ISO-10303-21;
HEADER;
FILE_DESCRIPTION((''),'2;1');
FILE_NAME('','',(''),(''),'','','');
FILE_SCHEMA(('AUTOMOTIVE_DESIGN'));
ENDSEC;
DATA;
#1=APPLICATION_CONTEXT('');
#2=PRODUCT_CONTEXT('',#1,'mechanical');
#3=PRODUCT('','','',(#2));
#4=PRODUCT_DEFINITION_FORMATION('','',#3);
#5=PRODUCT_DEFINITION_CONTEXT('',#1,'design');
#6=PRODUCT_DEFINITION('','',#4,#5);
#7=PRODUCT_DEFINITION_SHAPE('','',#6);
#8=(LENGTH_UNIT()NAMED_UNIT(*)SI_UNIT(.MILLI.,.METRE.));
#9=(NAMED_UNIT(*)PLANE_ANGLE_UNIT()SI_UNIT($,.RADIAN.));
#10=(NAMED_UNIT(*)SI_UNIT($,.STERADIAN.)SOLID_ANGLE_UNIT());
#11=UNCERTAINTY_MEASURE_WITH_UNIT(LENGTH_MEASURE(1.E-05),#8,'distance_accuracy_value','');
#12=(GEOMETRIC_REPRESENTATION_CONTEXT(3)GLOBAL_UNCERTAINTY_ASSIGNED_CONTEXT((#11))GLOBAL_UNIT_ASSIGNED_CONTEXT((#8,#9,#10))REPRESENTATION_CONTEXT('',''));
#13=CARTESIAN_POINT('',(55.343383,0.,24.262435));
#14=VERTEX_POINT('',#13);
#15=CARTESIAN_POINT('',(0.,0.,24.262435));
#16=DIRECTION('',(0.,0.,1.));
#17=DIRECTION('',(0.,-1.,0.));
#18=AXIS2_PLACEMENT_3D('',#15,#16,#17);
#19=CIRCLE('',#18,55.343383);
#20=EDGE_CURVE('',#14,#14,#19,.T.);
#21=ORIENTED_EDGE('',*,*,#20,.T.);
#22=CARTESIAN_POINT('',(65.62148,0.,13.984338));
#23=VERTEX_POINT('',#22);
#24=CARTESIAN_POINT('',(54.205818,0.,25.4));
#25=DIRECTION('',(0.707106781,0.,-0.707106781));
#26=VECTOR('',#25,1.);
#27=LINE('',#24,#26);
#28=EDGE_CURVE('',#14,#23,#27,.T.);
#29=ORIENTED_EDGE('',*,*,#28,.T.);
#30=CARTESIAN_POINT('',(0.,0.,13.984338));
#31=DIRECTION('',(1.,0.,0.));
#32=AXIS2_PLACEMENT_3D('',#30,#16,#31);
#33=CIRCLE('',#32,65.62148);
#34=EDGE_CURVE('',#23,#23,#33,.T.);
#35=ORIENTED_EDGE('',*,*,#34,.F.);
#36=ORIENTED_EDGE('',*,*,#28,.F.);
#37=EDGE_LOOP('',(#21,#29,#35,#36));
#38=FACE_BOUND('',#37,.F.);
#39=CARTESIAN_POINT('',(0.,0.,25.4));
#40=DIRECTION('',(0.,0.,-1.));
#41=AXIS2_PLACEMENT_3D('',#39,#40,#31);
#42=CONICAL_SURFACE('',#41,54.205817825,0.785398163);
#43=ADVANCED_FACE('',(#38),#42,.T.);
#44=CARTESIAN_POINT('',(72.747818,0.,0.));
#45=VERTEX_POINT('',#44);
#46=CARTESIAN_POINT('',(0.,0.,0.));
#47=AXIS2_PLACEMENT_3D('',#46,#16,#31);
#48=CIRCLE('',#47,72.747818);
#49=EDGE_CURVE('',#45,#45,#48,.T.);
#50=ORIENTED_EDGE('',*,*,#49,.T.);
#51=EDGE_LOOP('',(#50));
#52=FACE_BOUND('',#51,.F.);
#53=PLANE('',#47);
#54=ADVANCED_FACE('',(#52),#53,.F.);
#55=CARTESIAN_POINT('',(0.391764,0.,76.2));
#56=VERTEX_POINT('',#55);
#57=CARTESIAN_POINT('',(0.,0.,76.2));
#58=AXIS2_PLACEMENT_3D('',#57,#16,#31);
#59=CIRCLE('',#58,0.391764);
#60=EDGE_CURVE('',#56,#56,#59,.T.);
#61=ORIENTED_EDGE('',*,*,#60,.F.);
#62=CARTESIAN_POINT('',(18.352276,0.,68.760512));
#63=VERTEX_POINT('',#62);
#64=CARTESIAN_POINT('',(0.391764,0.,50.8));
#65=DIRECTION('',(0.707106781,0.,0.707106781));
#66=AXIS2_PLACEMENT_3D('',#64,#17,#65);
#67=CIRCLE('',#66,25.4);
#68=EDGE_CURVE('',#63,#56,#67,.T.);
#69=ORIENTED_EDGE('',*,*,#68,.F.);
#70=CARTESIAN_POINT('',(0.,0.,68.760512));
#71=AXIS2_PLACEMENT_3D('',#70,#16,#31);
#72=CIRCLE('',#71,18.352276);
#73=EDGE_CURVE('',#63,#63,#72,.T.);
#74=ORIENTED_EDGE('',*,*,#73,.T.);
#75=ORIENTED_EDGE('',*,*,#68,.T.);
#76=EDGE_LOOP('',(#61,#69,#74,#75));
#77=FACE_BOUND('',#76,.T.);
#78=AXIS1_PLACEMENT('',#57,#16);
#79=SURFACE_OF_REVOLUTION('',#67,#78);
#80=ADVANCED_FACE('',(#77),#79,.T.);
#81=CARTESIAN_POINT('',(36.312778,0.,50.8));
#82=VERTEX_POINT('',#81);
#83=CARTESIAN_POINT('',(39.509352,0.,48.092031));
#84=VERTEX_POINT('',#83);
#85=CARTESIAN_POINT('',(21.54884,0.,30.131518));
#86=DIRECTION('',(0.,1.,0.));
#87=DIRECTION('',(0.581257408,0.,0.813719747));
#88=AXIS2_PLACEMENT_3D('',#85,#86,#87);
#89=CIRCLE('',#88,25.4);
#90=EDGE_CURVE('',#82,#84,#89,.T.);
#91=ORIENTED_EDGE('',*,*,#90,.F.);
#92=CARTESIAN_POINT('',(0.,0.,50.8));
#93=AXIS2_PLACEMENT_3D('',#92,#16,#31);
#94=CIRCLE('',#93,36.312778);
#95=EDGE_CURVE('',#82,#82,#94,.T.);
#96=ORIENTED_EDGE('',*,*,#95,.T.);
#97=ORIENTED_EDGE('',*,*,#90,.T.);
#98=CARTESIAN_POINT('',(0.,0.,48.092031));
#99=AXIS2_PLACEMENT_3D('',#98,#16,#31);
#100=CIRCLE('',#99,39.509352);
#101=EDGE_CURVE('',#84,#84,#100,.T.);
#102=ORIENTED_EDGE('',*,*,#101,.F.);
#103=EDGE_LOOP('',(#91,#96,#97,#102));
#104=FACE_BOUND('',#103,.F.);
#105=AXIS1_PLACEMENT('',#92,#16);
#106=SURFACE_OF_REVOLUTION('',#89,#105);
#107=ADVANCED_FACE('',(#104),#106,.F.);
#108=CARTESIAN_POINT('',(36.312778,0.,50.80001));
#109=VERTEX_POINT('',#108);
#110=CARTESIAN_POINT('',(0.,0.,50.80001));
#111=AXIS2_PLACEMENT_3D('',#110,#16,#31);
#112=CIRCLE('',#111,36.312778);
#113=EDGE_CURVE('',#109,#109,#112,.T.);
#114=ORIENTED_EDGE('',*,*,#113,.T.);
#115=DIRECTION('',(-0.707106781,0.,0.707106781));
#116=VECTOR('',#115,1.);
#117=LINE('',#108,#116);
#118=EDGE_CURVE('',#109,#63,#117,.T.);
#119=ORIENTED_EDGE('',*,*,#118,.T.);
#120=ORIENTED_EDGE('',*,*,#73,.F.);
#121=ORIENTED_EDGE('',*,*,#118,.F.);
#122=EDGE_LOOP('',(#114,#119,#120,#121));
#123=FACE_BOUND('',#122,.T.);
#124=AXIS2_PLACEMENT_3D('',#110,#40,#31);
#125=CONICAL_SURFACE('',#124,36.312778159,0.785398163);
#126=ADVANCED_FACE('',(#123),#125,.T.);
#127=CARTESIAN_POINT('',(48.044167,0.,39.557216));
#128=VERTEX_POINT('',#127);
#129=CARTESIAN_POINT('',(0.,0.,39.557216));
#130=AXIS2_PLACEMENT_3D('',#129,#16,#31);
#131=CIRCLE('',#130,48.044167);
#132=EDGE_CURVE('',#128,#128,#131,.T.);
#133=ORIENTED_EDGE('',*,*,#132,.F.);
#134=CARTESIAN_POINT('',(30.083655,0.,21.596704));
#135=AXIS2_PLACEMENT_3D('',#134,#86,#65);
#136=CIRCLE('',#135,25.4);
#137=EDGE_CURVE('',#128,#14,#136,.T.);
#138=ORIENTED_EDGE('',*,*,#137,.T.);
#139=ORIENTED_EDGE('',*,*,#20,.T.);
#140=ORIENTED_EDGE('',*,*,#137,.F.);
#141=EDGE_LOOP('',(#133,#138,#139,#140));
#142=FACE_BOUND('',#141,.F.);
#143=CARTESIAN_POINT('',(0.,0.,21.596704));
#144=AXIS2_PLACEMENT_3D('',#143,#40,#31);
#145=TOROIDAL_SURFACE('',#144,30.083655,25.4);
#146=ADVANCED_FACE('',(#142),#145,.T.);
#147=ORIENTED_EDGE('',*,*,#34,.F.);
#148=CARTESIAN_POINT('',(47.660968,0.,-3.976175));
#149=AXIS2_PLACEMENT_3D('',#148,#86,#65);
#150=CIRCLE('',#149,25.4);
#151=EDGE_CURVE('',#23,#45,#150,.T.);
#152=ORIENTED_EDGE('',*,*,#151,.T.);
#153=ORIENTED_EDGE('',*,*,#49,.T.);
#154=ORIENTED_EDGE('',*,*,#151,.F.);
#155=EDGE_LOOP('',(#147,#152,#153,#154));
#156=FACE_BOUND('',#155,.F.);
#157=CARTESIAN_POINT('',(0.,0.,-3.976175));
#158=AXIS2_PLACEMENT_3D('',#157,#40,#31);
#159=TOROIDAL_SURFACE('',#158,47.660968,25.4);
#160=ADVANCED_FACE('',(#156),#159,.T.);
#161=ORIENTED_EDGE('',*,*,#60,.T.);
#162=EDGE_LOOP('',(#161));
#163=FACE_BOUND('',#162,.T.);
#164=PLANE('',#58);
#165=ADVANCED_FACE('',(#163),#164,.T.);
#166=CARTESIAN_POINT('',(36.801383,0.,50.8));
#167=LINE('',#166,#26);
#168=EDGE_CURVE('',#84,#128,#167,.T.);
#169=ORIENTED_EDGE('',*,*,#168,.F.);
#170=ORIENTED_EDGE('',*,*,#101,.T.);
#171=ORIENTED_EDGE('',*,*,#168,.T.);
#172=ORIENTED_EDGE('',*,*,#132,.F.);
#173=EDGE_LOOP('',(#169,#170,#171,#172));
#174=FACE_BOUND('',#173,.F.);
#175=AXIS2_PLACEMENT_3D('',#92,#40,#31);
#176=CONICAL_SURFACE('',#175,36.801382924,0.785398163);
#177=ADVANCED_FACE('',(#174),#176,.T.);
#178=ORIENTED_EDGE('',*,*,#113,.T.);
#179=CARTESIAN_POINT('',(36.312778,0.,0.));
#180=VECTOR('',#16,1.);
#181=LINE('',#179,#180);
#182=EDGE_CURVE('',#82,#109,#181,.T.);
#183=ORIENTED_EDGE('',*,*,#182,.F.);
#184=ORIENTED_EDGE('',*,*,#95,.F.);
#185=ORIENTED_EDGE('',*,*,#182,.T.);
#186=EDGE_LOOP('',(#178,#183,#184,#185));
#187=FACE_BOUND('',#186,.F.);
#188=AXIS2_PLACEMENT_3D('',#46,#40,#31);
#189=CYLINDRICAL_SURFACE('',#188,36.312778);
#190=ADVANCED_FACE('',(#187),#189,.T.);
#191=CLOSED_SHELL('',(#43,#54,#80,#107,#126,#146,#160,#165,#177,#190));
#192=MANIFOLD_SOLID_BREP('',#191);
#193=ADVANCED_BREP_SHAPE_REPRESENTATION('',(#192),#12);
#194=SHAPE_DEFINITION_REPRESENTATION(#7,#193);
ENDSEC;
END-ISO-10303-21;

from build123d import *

# Parameters (mm, degrees)
F0_R        = 36.3127781595
F1_DEPTH    = 76.2
F0_R_2      = 55.3433829245
F2_DEPTH    = 50.8
F0_R_3      = 72.7478178249
F3_DEPTH    = 25.4
F4_SIZE     = 25.39999
F5_S5_R     = 55.3433829245
F5_T6_DEPTH = 105


# Not quite as in the source:
# - a fillet or chamfer that OpenCascade refuses, or shapes differently, is made with other operations: its cross-section is extruded or revolved along the edge and cut away or added
# - a fillet or chamfer is up to 0.001 mm smaller than in the source, because OpenCascade refuses the exact size


with BuildPart() as f1:
    # F0 (on Top) → F1 (new body)
    with BuildSketch(Plane.XY):
        Circle(F0_R)
    extrude(amount=F1_DEPTH)

    # F0 (on Top) → F2 (join)
    with BuildSketch(Plane.XY):
        Circle(F0_R_2)
        Circle(F0_R, mode=Mode.SUBTRACT)
    extrude(amount=F2_DEPTH)

    # F0 (on Top) → F3 (join)
    with BuildSketch(Plane.XY):
        Circle(F0_R_3)
        Circle(F0_R_2, mode=Mode.SUBTRACT)
    extrude(amount=F3_DEPTH)

    # F4 (size 25.4 in the source; OpenCascade refuses exactly that, so slightly less here)
    f4_edges = [f1.edges().sort_by_distance(p)[0] for p in [
        (-36.312778, 0, 76.2),
    ]]
    chamfer(f4_edges, length=F4_SIZE)

    # F5: chamfer of 18.542 on 2 edges, made by hand


with BuildPart() as f5_tool2:
    # F5_s3 → F5_t4 (revolve)
    with BuildSketch(Plane.XZ):
        Polygon((54.2058178249, 25.4), (72.7478178249, 6.858), (72.7478178249, 25.4), align=None)
    revolve(axis=Axis((0, 0, 25.4), (0, 0, 1)))

    # F5_s5 → F5_t6 (cut, symmetric)
    with BuildSketch(Plane.XY.offset(16.1)):
        Circle(F5_S5_R)
    extrude(amount=F5_T6_DEPTH, both=True, mode=Mode.SUBTRACT)


with BuildPart() as f1_1:
    add(f1.part)

    # F5_t1: cut F5_tool2
    add(f5_tool2.part, mode=Mode.SUBTRACT)

    # F5_s7 → F5_t8 (revolve, cut)
    with BuildSketch(Plane.XZ):
        Polygon((36.8013829245, 50.8), (55.3433829245, 32.258), (55.3433829245, 50.8), align=None)
    revolve(axis=Axis((0, 0, 50.8), (0, 0, 1)), mode=Mode.SUBTRACT)

    # F6: fillet of radius 25.4 on 4 edges, made by hand

    # F6_s1 → F6_t2 (revolve, cut)
    with BuildSketch(Plane.XZ):
        with BuildLine():
            ThreePointArc((18.3522759174, 68.7605122421), (10.1119228573, 74.2665401258), (0.3917636752, 76.2))
            Line((0.3917636752, 76.2), (0.3917636752, 76.708))
            Line((0.3917636752, 76.708), (11.1232086492, 76.708))
            Line((11.1232086492, 76.708), (18.7114861622, 69.119722487))
            Line((18.7114861622, 69.119722487), (18.3522759174, 68.7605122421))
        make_face()
    revolve(axis=Axis((0, 0, 76.2), (0, 0, 1)), mode=Mode.SUBTRACT)

    # F6_s3 → F6_t4 (revolve, cut)
    with BuildSketch(Plane.XZ):
        with BuildLine():
            ThreePointArc((48.0441667783, 39.5572161462), (53.0070025329, 32.5365446991), (55.3433829245, 24.2624349004))
            Line((55.3433829245, 24.2624349004), (55.8485774923, 24.3157495203))
            ThreePointArc((55.8485774923, 24.3157495203), (55.8513829245, 28.2602174502), (55.8513829245, 32.258))
            Line((55.8513829245, 32.258), (55.7025931693, 32.6172102448))
            Line((55.7025931693, 32.6172102448), (48.4033770231, 39.9164263911))
            Line((48.4033770231, 39.9164263911), (48.0441667783, 39.5572161462))
        make_face()
    revolve(axis=Axis((0, 0, 32.258), (0, 0, 1)), mode=Mode.SUBTRACT)

    # F6_s5 → F6_t6 (revolve, cut)
    with BuildSketch(Plane.XZ):
        with BuildLine():
            ThreePointArc((65.6214802199, 13.984337605), (70.2919041112, 7.5564195951), (72.7478178249, 0))
            Line((72.7478178249, 0), (73.2495548219, 0.0795234927))
            ThreePointArc((73.2495548219, 0.0795234927), (73.2558178249, 3.429), (73.2558178249, 6.858))
            Line((73.2558178249, 6.858), (73.1070280697, 7.2172102448))
            Line((73.1070280697, 7.2172102448), (65.9806904647, 14.3435478499))
            Line((65.9806904647, 14.3435478499), (65.6214802199, 13.984337605))
        make_face()
    revolve(axis=Axis((0, 0, 6.858), (0, 0, 1)), mode=Mode.SUBTRACT)

    # F6_s7 → F6_t8 (revolve, cut)
    with BuildSketch(Plane.XZ):
        with BuildLine():
            ThreePointArc((36.3127781595, 50.8), (37.9669911758, 49.5120321576), (39.5093522451, 48.0920306794))
            Line((39.5093522451, 48.0920306794), (39.86856249, 48.4512409242))
            Line((39.86856249, 48.4512409242), (37.1605931693, 51.1592102448))
            Line((37.1605931693, 51.1592102448), (36.8013829245, 51.308))
            ThreePointArc((36.8013829245, 51.308), (36.557080542, 51.308), (36.6080569226, 51.2133696313))
            Line((36.6080569226, 51.2133696313), (36.3127781595, 50.8))
        make_face()
    revolve(axis=Axis((0, 0, 50.8), (0, 0, 1)), mode=Mode.SUBTRACT)


solid = f1_1.part
